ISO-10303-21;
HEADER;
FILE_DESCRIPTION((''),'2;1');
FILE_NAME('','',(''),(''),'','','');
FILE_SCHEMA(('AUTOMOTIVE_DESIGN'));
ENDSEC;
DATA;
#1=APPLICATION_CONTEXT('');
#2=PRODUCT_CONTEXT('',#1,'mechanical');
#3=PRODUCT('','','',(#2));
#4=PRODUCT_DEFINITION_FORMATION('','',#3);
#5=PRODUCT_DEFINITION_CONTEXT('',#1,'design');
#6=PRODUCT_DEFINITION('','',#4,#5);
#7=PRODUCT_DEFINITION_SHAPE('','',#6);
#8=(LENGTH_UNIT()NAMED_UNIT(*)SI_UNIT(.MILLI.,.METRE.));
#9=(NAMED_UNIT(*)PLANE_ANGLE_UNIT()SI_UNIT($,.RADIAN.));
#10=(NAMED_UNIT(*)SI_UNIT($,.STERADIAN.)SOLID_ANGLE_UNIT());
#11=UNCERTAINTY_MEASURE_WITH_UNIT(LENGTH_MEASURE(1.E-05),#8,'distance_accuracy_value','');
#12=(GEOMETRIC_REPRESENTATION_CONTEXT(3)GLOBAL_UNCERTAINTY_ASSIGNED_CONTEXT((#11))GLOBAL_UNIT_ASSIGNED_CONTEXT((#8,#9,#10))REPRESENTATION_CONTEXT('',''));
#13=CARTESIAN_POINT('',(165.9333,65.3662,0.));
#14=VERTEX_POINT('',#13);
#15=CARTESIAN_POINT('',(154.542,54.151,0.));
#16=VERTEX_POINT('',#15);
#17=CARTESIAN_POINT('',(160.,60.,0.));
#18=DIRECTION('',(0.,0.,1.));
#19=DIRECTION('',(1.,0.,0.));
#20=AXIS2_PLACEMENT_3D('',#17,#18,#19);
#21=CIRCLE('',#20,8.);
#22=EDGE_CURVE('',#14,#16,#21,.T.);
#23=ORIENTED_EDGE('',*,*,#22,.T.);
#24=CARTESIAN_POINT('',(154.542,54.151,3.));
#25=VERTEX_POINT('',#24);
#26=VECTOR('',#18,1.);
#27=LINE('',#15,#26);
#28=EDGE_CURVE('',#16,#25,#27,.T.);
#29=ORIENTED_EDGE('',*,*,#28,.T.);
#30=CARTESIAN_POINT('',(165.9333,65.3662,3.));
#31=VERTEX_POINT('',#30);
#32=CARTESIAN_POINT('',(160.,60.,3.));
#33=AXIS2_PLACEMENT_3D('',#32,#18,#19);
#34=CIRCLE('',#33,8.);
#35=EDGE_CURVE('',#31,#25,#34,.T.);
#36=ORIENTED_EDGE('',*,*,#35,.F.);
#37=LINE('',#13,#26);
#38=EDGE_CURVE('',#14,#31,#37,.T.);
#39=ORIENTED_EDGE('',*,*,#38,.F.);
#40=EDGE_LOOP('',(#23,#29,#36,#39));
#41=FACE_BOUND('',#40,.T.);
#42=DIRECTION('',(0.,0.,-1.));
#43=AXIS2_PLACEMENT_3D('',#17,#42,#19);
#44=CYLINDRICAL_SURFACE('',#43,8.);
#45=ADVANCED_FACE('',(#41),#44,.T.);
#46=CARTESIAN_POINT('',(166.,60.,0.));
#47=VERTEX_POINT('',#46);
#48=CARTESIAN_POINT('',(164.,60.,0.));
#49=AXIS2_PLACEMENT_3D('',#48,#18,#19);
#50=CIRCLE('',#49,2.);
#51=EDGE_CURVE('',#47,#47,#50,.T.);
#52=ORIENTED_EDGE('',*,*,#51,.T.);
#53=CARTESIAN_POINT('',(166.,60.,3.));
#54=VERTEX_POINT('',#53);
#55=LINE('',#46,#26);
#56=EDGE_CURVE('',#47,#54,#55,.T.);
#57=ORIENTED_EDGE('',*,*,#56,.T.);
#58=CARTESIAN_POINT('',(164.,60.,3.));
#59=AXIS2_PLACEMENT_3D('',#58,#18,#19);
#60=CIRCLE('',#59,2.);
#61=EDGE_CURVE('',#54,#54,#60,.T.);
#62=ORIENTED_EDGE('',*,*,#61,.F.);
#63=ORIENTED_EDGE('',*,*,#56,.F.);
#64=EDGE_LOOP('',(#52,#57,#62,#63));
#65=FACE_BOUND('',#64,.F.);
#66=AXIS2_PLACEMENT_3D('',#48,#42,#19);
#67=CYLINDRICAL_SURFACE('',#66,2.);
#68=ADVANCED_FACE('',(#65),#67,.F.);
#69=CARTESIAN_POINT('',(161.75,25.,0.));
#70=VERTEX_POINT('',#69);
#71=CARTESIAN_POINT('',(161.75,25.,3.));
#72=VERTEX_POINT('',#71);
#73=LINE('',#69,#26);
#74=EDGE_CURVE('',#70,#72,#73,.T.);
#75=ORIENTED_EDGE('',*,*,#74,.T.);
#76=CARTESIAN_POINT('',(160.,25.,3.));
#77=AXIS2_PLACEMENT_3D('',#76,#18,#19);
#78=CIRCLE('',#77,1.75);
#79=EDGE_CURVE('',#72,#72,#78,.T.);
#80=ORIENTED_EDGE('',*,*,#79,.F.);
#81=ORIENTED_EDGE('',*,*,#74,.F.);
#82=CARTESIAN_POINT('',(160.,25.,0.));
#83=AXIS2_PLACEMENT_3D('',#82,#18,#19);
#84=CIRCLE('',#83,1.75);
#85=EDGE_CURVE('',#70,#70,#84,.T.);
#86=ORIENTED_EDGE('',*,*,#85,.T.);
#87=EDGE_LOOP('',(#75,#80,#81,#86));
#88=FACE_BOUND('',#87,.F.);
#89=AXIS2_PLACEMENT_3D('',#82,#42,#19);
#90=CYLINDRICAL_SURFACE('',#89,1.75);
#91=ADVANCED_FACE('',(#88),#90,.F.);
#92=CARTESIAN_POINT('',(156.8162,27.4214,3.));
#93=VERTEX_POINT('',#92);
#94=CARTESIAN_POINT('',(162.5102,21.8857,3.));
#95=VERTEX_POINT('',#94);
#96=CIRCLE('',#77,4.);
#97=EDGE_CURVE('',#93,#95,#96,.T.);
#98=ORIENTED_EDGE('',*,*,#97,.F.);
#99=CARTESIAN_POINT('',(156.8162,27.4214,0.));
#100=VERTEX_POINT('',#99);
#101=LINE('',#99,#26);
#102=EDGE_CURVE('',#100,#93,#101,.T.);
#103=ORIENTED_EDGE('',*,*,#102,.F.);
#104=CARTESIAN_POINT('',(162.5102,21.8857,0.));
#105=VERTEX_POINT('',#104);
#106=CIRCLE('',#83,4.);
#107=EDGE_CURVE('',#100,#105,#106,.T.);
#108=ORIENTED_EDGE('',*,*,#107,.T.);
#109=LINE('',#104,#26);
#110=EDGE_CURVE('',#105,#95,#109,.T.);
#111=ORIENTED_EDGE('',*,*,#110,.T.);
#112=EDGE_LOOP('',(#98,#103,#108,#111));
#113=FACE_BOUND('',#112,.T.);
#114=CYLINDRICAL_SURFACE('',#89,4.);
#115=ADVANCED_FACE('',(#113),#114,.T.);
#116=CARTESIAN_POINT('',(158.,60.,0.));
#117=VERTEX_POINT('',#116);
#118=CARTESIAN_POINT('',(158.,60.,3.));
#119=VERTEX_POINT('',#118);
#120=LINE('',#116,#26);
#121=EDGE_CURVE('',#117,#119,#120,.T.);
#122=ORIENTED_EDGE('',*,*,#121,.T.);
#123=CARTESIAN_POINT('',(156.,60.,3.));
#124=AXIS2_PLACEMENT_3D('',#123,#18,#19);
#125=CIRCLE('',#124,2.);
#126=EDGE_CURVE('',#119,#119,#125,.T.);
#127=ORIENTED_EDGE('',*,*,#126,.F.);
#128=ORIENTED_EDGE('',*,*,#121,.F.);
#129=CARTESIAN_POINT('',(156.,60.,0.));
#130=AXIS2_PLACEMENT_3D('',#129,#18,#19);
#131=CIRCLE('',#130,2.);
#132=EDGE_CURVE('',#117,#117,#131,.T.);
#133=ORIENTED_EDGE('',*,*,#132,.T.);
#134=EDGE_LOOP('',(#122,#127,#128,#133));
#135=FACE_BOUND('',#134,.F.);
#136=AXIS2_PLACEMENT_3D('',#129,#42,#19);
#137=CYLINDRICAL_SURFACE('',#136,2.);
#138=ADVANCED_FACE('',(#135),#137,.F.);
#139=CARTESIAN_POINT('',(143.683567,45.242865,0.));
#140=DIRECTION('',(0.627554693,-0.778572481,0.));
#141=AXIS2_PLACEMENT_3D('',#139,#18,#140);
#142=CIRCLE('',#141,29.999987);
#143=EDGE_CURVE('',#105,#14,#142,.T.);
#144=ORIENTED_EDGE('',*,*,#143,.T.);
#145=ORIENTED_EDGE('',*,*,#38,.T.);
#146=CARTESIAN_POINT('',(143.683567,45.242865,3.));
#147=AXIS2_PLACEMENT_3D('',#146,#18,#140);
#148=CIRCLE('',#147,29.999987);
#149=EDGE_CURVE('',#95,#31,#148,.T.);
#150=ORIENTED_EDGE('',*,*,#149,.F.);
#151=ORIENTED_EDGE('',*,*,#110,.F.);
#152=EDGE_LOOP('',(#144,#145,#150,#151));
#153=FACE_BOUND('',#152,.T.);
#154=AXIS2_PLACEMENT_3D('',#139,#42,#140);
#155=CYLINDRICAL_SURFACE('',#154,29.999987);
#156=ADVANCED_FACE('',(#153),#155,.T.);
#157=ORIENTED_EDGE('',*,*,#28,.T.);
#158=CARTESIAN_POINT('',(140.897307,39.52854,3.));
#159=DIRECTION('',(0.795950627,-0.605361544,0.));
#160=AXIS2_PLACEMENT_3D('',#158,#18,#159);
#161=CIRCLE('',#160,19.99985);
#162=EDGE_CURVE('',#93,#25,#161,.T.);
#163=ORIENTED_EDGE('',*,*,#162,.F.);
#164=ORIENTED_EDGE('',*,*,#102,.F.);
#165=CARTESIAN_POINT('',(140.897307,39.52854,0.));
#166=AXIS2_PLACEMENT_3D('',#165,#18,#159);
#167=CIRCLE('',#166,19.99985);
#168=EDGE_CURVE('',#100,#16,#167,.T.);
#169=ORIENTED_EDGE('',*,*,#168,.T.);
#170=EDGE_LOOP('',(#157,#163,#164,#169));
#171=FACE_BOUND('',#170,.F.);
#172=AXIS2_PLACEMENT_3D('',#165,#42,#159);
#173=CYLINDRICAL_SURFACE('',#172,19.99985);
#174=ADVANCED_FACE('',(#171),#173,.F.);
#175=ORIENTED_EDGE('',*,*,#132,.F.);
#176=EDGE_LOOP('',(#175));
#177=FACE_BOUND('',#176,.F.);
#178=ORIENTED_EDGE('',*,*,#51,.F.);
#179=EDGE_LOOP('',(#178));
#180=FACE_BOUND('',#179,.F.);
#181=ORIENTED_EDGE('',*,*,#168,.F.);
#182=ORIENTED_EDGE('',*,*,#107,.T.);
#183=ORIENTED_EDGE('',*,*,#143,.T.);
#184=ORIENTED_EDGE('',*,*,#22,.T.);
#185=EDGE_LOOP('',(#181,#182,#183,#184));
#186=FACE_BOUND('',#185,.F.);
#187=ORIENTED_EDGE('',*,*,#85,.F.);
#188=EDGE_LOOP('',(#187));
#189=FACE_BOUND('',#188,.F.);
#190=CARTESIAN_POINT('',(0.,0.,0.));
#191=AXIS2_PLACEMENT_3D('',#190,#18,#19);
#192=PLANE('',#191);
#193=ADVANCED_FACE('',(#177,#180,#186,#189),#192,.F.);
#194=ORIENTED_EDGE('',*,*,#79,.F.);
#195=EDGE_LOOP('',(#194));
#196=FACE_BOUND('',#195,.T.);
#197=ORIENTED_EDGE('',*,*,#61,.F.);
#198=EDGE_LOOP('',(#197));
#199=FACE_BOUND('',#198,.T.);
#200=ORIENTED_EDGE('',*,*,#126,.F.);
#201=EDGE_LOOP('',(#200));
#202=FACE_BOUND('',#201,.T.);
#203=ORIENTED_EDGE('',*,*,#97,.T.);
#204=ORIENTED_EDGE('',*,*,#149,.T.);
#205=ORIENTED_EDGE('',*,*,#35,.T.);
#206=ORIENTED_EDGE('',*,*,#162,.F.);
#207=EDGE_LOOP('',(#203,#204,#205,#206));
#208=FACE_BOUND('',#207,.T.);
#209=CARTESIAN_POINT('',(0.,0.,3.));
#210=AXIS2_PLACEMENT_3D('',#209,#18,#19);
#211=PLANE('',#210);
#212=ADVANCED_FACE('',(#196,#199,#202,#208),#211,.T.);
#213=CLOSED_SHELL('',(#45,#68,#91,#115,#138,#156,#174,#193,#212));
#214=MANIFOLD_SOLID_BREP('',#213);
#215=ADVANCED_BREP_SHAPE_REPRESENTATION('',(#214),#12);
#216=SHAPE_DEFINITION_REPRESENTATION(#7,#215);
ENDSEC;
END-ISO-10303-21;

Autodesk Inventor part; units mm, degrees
ref_plane "YZ Plane" through (0, 0, 0) normal (1, 0, 0) x (0, 1, 0)
ref_plane "XZ Plane" through (0, 0, 0) normal (0, 1, 0) x (-1, 0, 0)
ref_plane "XY Plane" through (0, 0, 0) normal (0, 0, 1) x (1, 0, 0)
sketch "スケッチ1" plane through (0, 0, 0) normal (0, 0, 1) x (1, 0, 0)
  line L0 (160, 60) -> (160, 25) construction
  line L1 (160, 25) -> (154.8697, 39.0954) construction
  line L2 (154.8697, 39.0954) -> (174.0726, 33.5055) construction
  line L3 (174.0726, 33.5055) -> (160, 60) construction
  circle A0 centre (154.8697, 39.0954) radius 3 construction
  circle A1 centre (160, 60) radius 4 construction
  circle A2 centre (160, 60) radius 8
  line L4 (161.8764, 56.4674) -> (158.1236, 63.5326) construction
  circle A3 centre (164, 60) radius 4 construction
  circle A4 centre (156, 60) radius 4 construction
  circle A5 centre (164, 60) radius 3
  circle A6 centre (156, 60) radius 3
  line L5 (164, 60) -> (156, 60) construction
  circle A7 centre (160, 25) radius 4
  circle A8 centre (160, 25) radius 1.75
  arc A9 (162.5102, 21.8857) -> (165.9333, 65.3662) centre (143.6835, 45.2429) ccw
  arc A10 (156.8162, 27.4214) -> (154.542, 54.151) centre (140.8971, 39.5286) ccw
  circle A11 centre (156, 60) radius 2
  circle A12 centre (164, 60) radius 2
  point P0 (0, 0)
  point P1 (136.5819, 50.9264)
  point P2 (160, 60)
  dimension "d0" = 15
  dimension "d1" = 20
  dimension "d2" = 30
  dimension "d3" = 35
  dimension "d4" = 6
  dimension "d5" = 340
  dimension "d6" = 16
  dimension "d7" = 8
  dimension "d8" = 6
  dimension "d9" = 6
  dimension "d10" = 8
  dimension "d11" = 3.5
  dimension "d12" = 20
  dimension "d15" = 4
  dimension "d16" = 4
  dimension "d17" = 30
extrude "押し出し1" add sketch "スケッチ1" along normal blind 3 contours A2 | A2 A9 A7 A10 | A7 | A5 | A6
properties part number "原動節外側" material "アルミニウム 2014-T4"
